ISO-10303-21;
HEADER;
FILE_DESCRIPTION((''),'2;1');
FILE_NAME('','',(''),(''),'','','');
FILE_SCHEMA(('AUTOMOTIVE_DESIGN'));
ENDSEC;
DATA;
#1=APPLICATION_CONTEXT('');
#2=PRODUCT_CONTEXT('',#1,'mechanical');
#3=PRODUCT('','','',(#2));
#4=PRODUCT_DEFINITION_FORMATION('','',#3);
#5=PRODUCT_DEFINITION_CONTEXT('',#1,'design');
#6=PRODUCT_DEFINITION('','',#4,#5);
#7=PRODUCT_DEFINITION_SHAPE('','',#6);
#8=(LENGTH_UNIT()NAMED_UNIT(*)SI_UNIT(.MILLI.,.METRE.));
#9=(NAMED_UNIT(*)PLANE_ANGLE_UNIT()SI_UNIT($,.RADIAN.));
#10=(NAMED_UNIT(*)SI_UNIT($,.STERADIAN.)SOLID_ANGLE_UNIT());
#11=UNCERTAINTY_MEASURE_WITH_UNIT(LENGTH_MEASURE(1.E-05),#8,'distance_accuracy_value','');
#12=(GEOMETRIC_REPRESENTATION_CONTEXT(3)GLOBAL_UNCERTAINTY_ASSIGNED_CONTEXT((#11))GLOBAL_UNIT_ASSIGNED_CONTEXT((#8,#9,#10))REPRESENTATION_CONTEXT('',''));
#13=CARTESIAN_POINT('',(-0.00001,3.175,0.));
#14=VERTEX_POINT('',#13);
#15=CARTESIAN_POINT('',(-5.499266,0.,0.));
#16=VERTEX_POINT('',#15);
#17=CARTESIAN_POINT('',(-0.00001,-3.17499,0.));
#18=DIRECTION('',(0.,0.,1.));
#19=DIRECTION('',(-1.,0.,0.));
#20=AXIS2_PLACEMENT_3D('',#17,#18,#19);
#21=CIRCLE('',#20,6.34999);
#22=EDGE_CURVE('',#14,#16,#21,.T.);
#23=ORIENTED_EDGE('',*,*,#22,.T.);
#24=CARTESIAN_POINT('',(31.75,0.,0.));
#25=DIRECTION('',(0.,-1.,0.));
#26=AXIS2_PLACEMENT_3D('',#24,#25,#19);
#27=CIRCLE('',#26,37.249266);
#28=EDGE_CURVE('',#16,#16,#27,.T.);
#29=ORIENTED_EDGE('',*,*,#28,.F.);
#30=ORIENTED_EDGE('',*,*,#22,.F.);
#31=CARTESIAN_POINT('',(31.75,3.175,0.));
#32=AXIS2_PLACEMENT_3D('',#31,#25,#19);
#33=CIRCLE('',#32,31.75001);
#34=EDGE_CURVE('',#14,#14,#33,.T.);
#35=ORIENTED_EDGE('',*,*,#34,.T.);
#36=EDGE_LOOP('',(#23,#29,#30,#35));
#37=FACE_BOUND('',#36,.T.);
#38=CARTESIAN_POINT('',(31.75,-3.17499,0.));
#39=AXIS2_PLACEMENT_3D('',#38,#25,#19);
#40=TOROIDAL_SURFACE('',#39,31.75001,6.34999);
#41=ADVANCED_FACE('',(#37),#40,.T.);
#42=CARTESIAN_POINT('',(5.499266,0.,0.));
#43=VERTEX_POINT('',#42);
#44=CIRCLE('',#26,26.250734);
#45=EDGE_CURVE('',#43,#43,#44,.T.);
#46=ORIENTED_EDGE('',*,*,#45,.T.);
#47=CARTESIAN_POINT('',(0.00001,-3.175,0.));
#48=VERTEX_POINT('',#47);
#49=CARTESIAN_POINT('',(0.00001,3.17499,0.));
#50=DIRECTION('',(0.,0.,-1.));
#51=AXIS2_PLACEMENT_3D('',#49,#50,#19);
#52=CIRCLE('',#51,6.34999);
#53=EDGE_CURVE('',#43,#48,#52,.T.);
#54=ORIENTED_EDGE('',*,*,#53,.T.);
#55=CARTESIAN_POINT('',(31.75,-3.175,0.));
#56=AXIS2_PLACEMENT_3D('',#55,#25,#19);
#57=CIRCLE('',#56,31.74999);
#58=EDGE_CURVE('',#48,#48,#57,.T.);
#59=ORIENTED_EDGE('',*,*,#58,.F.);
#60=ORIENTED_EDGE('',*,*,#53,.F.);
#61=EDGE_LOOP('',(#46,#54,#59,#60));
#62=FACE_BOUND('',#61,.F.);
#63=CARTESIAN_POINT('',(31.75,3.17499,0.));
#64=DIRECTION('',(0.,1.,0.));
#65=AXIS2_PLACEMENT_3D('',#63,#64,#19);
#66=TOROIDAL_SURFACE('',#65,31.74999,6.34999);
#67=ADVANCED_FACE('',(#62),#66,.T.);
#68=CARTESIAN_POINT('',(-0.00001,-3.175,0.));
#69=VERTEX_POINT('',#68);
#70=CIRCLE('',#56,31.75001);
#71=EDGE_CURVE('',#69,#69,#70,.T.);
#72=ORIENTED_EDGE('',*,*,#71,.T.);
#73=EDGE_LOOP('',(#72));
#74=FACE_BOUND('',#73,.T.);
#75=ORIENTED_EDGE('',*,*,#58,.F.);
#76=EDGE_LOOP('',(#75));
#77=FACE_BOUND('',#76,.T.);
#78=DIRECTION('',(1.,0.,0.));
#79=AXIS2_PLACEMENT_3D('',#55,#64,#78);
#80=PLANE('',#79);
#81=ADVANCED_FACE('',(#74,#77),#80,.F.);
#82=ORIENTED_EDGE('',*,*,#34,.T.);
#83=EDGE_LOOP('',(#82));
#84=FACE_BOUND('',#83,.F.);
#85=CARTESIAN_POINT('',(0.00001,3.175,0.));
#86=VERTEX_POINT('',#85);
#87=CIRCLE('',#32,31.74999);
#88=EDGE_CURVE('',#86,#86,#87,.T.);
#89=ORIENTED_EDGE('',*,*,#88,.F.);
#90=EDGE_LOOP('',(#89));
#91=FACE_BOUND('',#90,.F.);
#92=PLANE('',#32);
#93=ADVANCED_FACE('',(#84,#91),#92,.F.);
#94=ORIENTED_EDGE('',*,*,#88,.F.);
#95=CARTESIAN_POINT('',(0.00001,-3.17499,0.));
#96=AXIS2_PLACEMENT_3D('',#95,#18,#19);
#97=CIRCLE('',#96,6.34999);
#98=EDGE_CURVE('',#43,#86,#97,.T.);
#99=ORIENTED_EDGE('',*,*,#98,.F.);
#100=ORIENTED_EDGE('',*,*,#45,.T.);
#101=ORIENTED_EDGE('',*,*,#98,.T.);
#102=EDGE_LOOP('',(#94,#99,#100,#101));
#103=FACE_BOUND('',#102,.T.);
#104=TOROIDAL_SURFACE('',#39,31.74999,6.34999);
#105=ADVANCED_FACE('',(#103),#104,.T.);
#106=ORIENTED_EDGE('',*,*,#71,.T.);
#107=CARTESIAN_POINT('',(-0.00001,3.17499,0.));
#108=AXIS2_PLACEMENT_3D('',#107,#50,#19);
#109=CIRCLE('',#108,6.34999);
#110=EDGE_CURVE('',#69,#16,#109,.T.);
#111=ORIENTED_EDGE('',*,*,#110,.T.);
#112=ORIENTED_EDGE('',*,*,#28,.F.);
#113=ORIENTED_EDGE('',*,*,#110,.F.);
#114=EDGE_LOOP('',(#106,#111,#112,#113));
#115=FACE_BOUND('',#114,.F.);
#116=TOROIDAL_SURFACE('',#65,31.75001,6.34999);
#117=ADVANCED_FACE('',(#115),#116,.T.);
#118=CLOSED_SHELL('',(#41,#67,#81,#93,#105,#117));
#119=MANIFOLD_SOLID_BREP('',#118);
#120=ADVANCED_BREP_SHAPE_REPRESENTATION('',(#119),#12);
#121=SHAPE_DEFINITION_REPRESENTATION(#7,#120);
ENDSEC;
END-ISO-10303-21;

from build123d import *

# Parameters (mm, degrees)
F0_W = 12.7
F0_H = 6.35
F2_R = 6.34999
F3_R = 6.34999


# Not quite as in the source:
# - a fillet or chamfer is up to 0.001 mm smaller than in the source, because OpenCascade refuses the exact size


with BuildPart() as f1:
    # F0 (on Top) → F1 (revolve)
    with BuildSketch(Plane.XY):
        Rectangle(F0_W, F0_H)
    revolve(axis=Axis((31.75, -0.4141320733, 0), (0, -1, 0)))

    # F2 (radius 6.35 in the source; OpenCascade refuses exactly that, so slightly less here)
    f2_edges = [f1.edges().sort_by_distance(p)[0] for p in [
        (57.15, 3.175, 0),
    ]]
    fillet(f2_edges, radius=F2_R)

    # F3 (radius 6.35 in the source; OpenCascade refuses exactly that, so slightly less here)
    f3_edges = [f1.edges().sort_by_distance(p)[0] for p in [
        (69.85, 3.175, 0),
    ]]
    fillet(f3_edges, radius=F3_R)

    # F4: F1 across plane


with BuildPart() as f1_1:
    add(f1.part)
    add(f1.part.mirror(Plane.XZ), mode=Mode.INTERSECT)


solid = f1_1.part
